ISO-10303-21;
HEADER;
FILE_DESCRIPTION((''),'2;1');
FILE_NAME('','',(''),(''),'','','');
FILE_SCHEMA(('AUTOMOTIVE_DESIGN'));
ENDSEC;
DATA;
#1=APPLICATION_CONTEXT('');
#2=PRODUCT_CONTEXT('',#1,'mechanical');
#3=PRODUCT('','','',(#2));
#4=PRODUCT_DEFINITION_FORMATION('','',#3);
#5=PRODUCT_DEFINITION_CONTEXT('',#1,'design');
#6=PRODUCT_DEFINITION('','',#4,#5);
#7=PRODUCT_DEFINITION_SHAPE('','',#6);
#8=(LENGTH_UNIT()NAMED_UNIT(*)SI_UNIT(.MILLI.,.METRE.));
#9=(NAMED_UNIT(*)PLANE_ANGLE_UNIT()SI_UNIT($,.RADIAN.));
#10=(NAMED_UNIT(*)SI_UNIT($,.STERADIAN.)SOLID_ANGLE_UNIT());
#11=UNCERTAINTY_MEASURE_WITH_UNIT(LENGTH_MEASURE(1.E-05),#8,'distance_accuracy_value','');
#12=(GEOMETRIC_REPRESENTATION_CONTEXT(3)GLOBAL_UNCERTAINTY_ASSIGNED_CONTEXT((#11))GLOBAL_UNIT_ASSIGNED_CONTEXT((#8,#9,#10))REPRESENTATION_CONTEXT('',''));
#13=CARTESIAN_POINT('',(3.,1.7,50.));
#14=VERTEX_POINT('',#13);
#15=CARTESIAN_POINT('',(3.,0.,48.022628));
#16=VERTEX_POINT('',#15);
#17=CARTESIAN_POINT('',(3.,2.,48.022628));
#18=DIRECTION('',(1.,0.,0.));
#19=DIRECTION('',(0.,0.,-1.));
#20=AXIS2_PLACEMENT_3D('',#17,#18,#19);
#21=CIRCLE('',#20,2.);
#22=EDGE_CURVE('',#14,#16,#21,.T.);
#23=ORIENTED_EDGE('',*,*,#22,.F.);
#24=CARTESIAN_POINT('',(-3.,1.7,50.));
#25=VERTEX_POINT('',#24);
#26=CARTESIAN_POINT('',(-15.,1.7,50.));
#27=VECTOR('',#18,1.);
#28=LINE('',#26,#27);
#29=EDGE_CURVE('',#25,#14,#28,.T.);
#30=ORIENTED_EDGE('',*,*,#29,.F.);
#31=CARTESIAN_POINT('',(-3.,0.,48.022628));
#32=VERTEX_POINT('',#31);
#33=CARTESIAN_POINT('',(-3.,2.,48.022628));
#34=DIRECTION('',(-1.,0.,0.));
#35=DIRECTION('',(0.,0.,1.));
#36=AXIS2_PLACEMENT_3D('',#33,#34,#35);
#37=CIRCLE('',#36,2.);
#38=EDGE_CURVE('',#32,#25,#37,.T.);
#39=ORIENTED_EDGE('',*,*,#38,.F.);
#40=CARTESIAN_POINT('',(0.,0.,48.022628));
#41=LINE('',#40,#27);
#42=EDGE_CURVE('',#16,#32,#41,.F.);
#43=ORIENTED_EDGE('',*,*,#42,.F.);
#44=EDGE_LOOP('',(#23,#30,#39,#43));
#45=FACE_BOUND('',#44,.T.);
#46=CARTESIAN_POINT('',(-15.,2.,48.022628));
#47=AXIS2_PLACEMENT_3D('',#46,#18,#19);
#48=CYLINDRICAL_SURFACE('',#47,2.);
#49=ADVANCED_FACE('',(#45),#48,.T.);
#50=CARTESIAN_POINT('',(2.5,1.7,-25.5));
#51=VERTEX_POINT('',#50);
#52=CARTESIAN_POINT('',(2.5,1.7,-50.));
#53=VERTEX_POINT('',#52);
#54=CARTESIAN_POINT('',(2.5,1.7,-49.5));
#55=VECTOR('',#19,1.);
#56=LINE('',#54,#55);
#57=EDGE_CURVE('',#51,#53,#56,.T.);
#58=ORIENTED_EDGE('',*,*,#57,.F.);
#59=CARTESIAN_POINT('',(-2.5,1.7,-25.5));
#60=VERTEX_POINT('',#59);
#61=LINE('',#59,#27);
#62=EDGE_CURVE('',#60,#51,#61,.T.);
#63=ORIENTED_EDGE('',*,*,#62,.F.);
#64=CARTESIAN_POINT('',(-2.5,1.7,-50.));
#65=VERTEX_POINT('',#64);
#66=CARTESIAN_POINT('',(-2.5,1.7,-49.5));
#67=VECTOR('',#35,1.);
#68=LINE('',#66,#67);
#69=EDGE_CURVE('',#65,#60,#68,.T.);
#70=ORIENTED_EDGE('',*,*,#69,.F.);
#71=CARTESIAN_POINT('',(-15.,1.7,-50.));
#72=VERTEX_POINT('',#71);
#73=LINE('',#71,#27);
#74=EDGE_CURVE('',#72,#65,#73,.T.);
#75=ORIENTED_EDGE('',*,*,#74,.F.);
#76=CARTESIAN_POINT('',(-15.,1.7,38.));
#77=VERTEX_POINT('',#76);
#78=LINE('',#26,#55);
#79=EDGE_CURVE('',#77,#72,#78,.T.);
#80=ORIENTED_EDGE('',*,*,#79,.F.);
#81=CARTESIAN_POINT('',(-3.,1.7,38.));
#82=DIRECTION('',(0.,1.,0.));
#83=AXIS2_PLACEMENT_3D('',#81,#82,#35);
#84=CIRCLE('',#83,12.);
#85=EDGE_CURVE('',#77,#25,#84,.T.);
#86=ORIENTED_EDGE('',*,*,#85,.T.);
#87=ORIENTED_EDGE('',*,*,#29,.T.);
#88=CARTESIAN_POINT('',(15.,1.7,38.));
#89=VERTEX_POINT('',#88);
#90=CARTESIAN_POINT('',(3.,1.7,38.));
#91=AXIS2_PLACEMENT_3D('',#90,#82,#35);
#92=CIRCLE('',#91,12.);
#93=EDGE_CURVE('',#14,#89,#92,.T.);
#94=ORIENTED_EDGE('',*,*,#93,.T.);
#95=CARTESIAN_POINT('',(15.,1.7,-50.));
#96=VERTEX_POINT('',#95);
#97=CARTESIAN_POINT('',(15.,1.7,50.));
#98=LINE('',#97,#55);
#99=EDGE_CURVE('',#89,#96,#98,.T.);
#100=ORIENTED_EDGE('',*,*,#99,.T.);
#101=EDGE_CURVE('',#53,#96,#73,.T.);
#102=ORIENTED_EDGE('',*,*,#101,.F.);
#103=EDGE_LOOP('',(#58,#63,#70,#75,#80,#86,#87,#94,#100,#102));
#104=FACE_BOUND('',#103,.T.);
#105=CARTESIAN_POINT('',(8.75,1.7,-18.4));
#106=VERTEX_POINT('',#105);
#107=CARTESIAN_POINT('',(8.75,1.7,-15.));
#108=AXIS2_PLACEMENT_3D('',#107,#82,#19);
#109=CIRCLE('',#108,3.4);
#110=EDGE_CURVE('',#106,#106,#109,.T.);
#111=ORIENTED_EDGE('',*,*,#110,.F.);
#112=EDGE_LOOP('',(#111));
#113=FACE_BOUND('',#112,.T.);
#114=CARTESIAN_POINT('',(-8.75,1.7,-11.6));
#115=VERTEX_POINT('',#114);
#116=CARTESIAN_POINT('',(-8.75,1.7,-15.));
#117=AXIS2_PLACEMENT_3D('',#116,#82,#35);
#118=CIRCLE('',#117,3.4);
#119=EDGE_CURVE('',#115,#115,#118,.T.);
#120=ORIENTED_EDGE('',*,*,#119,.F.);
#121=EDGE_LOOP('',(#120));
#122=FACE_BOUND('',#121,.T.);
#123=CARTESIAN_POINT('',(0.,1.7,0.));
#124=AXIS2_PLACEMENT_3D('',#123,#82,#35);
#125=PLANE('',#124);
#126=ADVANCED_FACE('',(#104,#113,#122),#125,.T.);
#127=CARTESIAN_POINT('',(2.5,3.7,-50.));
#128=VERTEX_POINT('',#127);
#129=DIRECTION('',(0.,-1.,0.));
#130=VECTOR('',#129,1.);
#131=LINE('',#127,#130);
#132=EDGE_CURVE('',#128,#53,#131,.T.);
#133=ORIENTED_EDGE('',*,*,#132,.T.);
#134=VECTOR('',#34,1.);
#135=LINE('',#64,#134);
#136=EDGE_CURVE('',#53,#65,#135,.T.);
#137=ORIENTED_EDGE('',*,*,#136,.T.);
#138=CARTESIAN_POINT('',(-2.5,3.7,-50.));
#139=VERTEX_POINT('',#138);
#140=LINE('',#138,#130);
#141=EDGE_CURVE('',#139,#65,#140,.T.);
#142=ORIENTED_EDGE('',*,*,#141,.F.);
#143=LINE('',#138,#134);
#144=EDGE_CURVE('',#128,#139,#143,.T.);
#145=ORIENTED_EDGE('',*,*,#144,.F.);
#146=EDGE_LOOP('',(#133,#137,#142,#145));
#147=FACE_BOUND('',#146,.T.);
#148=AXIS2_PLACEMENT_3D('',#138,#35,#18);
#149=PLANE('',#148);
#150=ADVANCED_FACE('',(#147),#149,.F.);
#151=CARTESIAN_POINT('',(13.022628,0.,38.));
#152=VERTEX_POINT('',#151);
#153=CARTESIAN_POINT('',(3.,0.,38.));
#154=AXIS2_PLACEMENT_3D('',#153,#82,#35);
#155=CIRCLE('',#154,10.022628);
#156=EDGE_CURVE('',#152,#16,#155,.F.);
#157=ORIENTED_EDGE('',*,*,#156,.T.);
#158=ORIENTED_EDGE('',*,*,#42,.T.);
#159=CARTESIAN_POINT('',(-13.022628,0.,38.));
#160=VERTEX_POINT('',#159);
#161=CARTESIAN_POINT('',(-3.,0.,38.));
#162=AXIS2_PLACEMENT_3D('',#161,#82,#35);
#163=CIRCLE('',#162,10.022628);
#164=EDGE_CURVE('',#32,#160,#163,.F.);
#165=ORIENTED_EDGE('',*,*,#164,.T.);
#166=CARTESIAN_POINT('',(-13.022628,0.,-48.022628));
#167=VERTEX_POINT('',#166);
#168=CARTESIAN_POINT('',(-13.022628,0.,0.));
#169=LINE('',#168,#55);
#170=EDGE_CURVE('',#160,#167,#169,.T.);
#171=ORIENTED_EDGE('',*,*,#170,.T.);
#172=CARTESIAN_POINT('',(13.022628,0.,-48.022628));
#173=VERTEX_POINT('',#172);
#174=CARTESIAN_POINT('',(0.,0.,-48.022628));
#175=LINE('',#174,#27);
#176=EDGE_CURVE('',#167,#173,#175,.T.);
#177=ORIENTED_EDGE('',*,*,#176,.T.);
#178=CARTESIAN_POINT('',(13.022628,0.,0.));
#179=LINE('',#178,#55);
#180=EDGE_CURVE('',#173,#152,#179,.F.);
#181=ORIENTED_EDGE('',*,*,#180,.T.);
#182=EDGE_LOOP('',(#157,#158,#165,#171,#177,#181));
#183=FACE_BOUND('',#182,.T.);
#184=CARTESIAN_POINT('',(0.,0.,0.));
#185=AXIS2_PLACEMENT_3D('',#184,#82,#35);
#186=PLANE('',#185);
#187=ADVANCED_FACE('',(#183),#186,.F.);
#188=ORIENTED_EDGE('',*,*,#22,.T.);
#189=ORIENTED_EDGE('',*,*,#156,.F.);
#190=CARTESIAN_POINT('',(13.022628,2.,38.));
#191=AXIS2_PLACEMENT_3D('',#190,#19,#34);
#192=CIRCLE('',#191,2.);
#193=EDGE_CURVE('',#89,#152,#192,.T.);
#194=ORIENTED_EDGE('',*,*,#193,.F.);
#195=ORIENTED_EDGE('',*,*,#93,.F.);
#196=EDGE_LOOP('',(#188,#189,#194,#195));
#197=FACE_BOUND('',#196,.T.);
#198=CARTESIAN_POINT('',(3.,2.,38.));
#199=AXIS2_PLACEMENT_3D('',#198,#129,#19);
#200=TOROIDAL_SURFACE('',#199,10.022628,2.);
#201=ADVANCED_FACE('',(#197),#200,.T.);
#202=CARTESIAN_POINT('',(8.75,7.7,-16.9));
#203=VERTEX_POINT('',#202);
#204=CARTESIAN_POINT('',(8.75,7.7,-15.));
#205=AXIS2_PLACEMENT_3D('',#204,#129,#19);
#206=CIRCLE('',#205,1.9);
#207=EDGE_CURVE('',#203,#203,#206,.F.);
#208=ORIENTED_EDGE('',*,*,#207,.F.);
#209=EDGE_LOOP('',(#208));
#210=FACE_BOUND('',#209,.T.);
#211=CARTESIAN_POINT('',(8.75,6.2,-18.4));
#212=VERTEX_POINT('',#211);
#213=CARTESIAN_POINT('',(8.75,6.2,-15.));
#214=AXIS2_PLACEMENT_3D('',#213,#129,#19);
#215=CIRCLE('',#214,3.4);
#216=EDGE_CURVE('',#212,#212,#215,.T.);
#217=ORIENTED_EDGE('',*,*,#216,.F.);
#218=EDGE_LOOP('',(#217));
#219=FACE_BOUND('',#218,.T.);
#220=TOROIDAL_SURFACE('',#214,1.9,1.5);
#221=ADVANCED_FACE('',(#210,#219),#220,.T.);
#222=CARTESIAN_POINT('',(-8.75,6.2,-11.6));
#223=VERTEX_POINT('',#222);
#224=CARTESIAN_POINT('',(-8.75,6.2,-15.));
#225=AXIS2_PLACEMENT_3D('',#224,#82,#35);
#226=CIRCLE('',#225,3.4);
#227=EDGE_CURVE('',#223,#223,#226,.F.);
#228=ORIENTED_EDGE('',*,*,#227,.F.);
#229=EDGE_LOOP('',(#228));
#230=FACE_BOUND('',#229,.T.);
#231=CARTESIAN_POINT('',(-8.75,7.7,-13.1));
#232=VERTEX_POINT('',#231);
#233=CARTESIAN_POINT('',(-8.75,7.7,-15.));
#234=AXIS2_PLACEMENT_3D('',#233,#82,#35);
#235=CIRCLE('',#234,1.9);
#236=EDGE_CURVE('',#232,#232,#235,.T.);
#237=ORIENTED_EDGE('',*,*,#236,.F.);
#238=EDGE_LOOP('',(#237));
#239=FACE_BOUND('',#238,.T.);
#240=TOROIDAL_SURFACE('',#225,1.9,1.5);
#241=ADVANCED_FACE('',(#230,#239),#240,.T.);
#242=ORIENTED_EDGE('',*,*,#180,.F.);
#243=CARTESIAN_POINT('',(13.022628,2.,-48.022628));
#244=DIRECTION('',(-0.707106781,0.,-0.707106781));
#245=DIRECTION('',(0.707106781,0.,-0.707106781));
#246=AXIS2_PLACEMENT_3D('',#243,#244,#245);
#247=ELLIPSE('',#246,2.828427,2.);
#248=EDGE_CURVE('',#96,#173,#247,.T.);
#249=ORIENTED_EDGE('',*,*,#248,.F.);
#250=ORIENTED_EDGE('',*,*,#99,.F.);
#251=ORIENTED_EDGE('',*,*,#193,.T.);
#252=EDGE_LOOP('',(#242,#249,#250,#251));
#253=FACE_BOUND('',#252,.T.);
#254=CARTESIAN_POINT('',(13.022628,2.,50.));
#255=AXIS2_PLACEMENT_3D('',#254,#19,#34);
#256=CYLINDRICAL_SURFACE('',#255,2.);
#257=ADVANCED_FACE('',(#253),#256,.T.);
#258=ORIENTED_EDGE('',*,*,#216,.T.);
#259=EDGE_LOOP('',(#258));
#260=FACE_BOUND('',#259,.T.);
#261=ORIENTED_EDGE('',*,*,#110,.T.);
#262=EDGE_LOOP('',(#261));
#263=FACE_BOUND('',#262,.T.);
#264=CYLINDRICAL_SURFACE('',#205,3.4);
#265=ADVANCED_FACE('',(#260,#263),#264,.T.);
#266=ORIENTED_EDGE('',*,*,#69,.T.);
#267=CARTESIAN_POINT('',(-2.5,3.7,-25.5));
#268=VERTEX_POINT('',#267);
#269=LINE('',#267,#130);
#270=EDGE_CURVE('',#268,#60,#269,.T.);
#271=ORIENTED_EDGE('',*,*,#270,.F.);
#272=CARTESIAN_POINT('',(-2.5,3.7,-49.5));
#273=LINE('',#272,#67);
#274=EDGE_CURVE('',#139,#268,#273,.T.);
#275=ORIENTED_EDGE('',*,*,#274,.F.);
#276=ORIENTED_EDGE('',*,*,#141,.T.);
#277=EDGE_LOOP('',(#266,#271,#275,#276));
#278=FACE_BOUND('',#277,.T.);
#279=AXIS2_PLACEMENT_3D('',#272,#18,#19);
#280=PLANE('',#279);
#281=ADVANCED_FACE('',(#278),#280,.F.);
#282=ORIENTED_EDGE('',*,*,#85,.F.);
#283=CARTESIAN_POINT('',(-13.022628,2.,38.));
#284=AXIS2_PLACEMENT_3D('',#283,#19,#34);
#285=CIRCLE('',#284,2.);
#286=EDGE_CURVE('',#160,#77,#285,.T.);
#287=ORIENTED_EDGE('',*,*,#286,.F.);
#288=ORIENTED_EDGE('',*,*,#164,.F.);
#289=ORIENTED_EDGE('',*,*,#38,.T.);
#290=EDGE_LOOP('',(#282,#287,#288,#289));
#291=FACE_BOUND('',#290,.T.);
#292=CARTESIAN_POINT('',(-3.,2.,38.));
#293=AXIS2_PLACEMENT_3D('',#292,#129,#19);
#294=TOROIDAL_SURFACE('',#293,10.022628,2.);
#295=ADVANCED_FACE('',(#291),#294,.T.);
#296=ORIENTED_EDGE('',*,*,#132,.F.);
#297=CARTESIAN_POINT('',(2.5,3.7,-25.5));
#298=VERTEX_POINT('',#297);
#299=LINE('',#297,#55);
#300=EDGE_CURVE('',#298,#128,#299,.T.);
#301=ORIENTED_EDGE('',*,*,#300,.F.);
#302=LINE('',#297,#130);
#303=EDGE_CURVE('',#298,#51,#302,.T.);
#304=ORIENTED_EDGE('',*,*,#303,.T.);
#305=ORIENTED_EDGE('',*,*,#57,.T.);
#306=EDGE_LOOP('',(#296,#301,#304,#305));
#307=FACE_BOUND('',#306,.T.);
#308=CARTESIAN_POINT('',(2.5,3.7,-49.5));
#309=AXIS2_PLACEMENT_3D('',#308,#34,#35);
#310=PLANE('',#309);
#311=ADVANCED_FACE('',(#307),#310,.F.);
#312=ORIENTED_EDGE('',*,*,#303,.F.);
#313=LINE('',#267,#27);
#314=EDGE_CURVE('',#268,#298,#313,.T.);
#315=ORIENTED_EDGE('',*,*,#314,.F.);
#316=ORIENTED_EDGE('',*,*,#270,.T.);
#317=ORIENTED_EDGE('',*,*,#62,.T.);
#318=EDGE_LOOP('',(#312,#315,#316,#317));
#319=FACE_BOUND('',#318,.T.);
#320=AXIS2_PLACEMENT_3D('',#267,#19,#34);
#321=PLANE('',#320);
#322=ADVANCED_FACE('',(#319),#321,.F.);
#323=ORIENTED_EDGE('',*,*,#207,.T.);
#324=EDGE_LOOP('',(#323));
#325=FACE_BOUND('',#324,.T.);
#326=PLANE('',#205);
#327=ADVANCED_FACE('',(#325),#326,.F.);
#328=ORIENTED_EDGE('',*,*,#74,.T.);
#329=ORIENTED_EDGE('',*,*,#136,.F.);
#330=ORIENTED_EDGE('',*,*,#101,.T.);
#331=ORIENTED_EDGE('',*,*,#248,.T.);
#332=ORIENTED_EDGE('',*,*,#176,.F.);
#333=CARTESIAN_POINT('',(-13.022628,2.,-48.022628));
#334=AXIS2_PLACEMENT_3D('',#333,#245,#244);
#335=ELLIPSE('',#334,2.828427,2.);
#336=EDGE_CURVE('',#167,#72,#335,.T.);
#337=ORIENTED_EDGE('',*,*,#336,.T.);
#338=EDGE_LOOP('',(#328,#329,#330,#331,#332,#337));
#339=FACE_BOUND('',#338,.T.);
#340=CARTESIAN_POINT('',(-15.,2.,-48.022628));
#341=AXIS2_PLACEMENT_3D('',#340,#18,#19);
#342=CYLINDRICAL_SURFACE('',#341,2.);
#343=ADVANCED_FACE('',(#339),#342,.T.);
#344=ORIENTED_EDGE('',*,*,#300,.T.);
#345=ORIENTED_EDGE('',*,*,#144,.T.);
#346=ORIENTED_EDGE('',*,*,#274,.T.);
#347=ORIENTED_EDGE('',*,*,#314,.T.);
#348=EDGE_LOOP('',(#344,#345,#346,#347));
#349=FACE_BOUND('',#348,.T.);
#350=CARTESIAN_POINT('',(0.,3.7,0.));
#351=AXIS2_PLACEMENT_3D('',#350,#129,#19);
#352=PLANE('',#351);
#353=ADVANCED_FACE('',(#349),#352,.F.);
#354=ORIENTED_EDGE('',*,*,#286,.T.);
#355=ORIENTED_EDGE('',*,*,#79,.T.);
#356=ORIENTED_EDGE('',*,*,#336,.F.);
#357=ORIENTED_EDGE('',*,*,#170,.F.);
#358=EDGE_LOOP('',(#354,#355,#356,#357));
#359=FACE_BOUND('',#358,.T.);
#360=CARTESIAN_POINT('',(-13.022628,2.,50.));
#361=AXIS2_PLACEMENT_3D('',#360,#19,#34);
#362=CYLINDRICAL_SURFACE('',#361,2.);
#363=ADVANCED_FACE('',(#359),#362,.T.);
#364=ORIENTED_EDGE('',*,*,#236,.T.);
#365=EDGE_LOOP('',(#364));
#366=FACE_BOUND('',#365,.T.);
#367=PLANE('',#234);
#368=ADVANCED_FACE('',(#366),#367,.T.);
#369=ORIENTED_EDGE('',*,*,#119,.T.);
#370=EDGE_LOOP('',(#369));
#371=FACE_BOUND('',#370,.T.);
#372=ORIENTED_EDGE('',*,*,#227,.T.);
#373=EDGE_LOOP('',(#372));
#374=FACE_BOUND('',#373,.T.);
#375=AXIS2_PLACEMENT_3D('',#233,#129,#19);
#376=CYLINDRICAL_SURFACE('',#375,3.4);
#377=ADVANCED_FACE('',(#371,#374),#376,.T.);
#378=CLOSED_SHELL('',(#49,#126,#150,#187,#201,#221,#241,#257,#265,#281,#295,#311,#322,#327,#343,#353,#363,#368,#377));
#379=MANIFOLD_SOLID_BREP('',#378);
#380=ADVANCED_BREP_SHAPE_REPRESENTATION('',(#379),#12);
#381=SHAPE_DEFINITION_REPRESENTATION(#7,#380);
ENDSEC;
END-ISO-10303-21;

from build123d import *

# Parameters (mm, degrees)
SKETCH1_W           = 30
SKETCH1_H           = 100
BOSS_EXTRUDE1_DEPTH = 1.7
FILLET2_R           = 12
FILLET3_R           = 2
BOSS_EXTRUDE2_DEPTH = 2
SKETCH4_R           = 3.4
BOSS_EXTRUDE3_DEPTH = 6
FILLET4_R           = 1.5


with BuildPart() as part:
    # Sketch1 → Boss-Extrude1 (new body)
    with BuildSketch(Plane(origin=(0, 0, 0), x_dir=(1, 0, 0), z_dir=(0, 1, 0))):
        Rectangle(SKETCH1_W, SKETCH1_H)
    extrude(amount=BOSS_EXTRUDE1_DEPTH)

    # Fillet2
    fillet2_edges = [part.edges().sort_by_distance(p)[0] for p in [
        (-15, 0.85, 50),
        (15, 0.85, 50),
    ]]
    fillet(fillet2_edges, radius=FILLET2_R)

    # Fillet3
    # the kernel refuses this fillet: 2 mm, written as the material it takes off along each edge
    with BuildSketch(Plane(origin=(19.943429983, 0, -50), x_dir=(0, 0, 1), z_dir=(-1, 0, 0))) as fillet3_piece_1:
        with BuildLine():
            CenterArc((1.977371993, 2), FILLET3_R, 188.626926559, 81.373073441)
            Line((0, 1.7), (-0.03954744, 1.694))
            ThreePointArc((-0.03954744, 1.694), (-0.04, 0.85), (-0.04, 0))
            Line((-0.04, 0), (0, -0.04))
            Line((0, -0.04), (1.977371993, -0.04))
            Line((1.977371993, -0.04), (1.977371993, 0))
        make_face()
    extrude(amount=39.886859967, mode=Mode.SUBTRACT)
    with BuildSketch(Plane(origin=(-15, 0, -54.943429983), x_dir=(1, 0, 0), z_dir=(0, 0, 1)), Plane(origin=(15, 0, 38), x_dir=(-1, 0, 0), z_dir=(0, 0, -1))) as fillet3_piece_2:
        with BuildLine():
            CenterArc((1.977371993, 2), FILLET3_R, 188.626926559, 81.373073441)
            Line((0, 1.7), (-0.03954744, 1.694))
            ThreePointArc((-0.03954744, 1.694), (-0.04, 0.85), (-0.04, 0))
            Line((-0.04, 0), (0, -0.04))
            Line((0, -0.04), (1.977371993, -0.04))
            Line((1.977371993, -0.04), (1.977371993, 0))
        make_face()
    extrude(amount=92.943429983, mode=Mode.SUBTRACT)
    with BuildSketch(Plane(origin=(-3, 0, 38), x_dir=(0, 0, 1), z_dir=(1, 0, 0))) as fillet3_piece_3:
        with BuildLine():
            CenterArc((10.022628007, -2), FILLET3_R, 8.626926559, 81.373073441)
            Line((12, -1.7), (12.03954744, -1.694))
            ThreePointArc((12.03954744, -1.694), (12.04, -0.85), (12.04, 0))
            Line((12.04, 0), (12, 0.04))
            Line((12, 0.04), (10.022628007, 0.04))
            Line((10.022628007, 0.04), (10.022628007, 0))
        make_face()
    revolve(axis=Axis((-3, 0, 38), (0, -1, 0)), revolution_arc=90, mode=Mode.SUBTRACT)
    with BuildSketch(Plane(origin=(-3, 0, 50), x_dir=(0, 1, 0), z_dir=(1, 0, 0))) as fillet3_piece_4:
        with BuildLine():
            CenterArc((2, -1.977371993), FILLET3_R, 98.626926559, 81.373073441)
            Line((0, -1.977371993), (-0.04, -1.977371993))
            Line((-0.04, -1.977371993), (-0.04, 0))
            Line((-0.04, 0), (0, 0.04))
            ThreePointArc((0, 0.04), (0.85, 0.04), (1.694, 0.03954744))
            Line((1.694, 0.03954744), (1.7, 0))
        make_face()
    extrude(amount=6, mode=Mode.SUBTRACT)
    with BuildSketch(Plane(origin=(3, 0, 38), x_dir=(0, 0, 1), z_dir=(-1, 0, 0))) as fillet3_piece_5:
        with BuildLine():
            CenterArc((10.022628007, 2), FILLET3_R, 270, 81.373073441)
            Line((12, 1.7), (12.03954744, 1.694))
            ThreePointArc((12.03954744, 1.694), (12.04, 0.85), (12.04, 0))
            Line((12.04, 0), (12, -0.04))
            Line((12, -0.04), (10.022628007, -0.04))
            Line((10.022628007, -0.04), (10.022628007, 0))
        make_face()
    revolve(axis=Axis((3, 0, 38), (0, 1, 0)), revolution_arc=90, mode=Mode.SUBTRACT)

    # Sketch3 → Boss-Extrude2 (add)
    with BuildSketch(Plane(origin=(0, 1.7, 0), x_dir=(1, 0, 0), z_dir=(0, 1, 0))):
        Polygon((-2.5, 50), (2.5, 50), (2.5, 49.5), (2.5, 25.5), (-2.5, 25.5), (-2.5, 49.5), align=None)
    extrude(amount=BOSS_EXTRUDE2_DEPTH)

    # Sketch4 → Boss-Extrude3 (add)
    with BuildSketch(Plane(origin=(0, 1.7, 0), x_dir=(1, 0, 0), z_dir=(0, 1, 0))):
        with Locations(Location((-8.75, 15, 0), (0, 0, 270))):
            Circle(SKETCH4_R)
        with Locations(Location((8.75, 15, 0), (0, 0, 90))):
            Circle(SKETCH4_R)
    extrude(amount=BOSS_EXTRUDE3_DEPTH)

    # Fillet4
    fillet4_edges = [part.edges().sort_by_distance(p)[0] for p in [
        (-8.75, 7.7, -18.4),
        (8.75, 7.7, -11.6),
    ]]
    fillet(fillet4_edges, radius=FILLET4_R)


solid = part.part
